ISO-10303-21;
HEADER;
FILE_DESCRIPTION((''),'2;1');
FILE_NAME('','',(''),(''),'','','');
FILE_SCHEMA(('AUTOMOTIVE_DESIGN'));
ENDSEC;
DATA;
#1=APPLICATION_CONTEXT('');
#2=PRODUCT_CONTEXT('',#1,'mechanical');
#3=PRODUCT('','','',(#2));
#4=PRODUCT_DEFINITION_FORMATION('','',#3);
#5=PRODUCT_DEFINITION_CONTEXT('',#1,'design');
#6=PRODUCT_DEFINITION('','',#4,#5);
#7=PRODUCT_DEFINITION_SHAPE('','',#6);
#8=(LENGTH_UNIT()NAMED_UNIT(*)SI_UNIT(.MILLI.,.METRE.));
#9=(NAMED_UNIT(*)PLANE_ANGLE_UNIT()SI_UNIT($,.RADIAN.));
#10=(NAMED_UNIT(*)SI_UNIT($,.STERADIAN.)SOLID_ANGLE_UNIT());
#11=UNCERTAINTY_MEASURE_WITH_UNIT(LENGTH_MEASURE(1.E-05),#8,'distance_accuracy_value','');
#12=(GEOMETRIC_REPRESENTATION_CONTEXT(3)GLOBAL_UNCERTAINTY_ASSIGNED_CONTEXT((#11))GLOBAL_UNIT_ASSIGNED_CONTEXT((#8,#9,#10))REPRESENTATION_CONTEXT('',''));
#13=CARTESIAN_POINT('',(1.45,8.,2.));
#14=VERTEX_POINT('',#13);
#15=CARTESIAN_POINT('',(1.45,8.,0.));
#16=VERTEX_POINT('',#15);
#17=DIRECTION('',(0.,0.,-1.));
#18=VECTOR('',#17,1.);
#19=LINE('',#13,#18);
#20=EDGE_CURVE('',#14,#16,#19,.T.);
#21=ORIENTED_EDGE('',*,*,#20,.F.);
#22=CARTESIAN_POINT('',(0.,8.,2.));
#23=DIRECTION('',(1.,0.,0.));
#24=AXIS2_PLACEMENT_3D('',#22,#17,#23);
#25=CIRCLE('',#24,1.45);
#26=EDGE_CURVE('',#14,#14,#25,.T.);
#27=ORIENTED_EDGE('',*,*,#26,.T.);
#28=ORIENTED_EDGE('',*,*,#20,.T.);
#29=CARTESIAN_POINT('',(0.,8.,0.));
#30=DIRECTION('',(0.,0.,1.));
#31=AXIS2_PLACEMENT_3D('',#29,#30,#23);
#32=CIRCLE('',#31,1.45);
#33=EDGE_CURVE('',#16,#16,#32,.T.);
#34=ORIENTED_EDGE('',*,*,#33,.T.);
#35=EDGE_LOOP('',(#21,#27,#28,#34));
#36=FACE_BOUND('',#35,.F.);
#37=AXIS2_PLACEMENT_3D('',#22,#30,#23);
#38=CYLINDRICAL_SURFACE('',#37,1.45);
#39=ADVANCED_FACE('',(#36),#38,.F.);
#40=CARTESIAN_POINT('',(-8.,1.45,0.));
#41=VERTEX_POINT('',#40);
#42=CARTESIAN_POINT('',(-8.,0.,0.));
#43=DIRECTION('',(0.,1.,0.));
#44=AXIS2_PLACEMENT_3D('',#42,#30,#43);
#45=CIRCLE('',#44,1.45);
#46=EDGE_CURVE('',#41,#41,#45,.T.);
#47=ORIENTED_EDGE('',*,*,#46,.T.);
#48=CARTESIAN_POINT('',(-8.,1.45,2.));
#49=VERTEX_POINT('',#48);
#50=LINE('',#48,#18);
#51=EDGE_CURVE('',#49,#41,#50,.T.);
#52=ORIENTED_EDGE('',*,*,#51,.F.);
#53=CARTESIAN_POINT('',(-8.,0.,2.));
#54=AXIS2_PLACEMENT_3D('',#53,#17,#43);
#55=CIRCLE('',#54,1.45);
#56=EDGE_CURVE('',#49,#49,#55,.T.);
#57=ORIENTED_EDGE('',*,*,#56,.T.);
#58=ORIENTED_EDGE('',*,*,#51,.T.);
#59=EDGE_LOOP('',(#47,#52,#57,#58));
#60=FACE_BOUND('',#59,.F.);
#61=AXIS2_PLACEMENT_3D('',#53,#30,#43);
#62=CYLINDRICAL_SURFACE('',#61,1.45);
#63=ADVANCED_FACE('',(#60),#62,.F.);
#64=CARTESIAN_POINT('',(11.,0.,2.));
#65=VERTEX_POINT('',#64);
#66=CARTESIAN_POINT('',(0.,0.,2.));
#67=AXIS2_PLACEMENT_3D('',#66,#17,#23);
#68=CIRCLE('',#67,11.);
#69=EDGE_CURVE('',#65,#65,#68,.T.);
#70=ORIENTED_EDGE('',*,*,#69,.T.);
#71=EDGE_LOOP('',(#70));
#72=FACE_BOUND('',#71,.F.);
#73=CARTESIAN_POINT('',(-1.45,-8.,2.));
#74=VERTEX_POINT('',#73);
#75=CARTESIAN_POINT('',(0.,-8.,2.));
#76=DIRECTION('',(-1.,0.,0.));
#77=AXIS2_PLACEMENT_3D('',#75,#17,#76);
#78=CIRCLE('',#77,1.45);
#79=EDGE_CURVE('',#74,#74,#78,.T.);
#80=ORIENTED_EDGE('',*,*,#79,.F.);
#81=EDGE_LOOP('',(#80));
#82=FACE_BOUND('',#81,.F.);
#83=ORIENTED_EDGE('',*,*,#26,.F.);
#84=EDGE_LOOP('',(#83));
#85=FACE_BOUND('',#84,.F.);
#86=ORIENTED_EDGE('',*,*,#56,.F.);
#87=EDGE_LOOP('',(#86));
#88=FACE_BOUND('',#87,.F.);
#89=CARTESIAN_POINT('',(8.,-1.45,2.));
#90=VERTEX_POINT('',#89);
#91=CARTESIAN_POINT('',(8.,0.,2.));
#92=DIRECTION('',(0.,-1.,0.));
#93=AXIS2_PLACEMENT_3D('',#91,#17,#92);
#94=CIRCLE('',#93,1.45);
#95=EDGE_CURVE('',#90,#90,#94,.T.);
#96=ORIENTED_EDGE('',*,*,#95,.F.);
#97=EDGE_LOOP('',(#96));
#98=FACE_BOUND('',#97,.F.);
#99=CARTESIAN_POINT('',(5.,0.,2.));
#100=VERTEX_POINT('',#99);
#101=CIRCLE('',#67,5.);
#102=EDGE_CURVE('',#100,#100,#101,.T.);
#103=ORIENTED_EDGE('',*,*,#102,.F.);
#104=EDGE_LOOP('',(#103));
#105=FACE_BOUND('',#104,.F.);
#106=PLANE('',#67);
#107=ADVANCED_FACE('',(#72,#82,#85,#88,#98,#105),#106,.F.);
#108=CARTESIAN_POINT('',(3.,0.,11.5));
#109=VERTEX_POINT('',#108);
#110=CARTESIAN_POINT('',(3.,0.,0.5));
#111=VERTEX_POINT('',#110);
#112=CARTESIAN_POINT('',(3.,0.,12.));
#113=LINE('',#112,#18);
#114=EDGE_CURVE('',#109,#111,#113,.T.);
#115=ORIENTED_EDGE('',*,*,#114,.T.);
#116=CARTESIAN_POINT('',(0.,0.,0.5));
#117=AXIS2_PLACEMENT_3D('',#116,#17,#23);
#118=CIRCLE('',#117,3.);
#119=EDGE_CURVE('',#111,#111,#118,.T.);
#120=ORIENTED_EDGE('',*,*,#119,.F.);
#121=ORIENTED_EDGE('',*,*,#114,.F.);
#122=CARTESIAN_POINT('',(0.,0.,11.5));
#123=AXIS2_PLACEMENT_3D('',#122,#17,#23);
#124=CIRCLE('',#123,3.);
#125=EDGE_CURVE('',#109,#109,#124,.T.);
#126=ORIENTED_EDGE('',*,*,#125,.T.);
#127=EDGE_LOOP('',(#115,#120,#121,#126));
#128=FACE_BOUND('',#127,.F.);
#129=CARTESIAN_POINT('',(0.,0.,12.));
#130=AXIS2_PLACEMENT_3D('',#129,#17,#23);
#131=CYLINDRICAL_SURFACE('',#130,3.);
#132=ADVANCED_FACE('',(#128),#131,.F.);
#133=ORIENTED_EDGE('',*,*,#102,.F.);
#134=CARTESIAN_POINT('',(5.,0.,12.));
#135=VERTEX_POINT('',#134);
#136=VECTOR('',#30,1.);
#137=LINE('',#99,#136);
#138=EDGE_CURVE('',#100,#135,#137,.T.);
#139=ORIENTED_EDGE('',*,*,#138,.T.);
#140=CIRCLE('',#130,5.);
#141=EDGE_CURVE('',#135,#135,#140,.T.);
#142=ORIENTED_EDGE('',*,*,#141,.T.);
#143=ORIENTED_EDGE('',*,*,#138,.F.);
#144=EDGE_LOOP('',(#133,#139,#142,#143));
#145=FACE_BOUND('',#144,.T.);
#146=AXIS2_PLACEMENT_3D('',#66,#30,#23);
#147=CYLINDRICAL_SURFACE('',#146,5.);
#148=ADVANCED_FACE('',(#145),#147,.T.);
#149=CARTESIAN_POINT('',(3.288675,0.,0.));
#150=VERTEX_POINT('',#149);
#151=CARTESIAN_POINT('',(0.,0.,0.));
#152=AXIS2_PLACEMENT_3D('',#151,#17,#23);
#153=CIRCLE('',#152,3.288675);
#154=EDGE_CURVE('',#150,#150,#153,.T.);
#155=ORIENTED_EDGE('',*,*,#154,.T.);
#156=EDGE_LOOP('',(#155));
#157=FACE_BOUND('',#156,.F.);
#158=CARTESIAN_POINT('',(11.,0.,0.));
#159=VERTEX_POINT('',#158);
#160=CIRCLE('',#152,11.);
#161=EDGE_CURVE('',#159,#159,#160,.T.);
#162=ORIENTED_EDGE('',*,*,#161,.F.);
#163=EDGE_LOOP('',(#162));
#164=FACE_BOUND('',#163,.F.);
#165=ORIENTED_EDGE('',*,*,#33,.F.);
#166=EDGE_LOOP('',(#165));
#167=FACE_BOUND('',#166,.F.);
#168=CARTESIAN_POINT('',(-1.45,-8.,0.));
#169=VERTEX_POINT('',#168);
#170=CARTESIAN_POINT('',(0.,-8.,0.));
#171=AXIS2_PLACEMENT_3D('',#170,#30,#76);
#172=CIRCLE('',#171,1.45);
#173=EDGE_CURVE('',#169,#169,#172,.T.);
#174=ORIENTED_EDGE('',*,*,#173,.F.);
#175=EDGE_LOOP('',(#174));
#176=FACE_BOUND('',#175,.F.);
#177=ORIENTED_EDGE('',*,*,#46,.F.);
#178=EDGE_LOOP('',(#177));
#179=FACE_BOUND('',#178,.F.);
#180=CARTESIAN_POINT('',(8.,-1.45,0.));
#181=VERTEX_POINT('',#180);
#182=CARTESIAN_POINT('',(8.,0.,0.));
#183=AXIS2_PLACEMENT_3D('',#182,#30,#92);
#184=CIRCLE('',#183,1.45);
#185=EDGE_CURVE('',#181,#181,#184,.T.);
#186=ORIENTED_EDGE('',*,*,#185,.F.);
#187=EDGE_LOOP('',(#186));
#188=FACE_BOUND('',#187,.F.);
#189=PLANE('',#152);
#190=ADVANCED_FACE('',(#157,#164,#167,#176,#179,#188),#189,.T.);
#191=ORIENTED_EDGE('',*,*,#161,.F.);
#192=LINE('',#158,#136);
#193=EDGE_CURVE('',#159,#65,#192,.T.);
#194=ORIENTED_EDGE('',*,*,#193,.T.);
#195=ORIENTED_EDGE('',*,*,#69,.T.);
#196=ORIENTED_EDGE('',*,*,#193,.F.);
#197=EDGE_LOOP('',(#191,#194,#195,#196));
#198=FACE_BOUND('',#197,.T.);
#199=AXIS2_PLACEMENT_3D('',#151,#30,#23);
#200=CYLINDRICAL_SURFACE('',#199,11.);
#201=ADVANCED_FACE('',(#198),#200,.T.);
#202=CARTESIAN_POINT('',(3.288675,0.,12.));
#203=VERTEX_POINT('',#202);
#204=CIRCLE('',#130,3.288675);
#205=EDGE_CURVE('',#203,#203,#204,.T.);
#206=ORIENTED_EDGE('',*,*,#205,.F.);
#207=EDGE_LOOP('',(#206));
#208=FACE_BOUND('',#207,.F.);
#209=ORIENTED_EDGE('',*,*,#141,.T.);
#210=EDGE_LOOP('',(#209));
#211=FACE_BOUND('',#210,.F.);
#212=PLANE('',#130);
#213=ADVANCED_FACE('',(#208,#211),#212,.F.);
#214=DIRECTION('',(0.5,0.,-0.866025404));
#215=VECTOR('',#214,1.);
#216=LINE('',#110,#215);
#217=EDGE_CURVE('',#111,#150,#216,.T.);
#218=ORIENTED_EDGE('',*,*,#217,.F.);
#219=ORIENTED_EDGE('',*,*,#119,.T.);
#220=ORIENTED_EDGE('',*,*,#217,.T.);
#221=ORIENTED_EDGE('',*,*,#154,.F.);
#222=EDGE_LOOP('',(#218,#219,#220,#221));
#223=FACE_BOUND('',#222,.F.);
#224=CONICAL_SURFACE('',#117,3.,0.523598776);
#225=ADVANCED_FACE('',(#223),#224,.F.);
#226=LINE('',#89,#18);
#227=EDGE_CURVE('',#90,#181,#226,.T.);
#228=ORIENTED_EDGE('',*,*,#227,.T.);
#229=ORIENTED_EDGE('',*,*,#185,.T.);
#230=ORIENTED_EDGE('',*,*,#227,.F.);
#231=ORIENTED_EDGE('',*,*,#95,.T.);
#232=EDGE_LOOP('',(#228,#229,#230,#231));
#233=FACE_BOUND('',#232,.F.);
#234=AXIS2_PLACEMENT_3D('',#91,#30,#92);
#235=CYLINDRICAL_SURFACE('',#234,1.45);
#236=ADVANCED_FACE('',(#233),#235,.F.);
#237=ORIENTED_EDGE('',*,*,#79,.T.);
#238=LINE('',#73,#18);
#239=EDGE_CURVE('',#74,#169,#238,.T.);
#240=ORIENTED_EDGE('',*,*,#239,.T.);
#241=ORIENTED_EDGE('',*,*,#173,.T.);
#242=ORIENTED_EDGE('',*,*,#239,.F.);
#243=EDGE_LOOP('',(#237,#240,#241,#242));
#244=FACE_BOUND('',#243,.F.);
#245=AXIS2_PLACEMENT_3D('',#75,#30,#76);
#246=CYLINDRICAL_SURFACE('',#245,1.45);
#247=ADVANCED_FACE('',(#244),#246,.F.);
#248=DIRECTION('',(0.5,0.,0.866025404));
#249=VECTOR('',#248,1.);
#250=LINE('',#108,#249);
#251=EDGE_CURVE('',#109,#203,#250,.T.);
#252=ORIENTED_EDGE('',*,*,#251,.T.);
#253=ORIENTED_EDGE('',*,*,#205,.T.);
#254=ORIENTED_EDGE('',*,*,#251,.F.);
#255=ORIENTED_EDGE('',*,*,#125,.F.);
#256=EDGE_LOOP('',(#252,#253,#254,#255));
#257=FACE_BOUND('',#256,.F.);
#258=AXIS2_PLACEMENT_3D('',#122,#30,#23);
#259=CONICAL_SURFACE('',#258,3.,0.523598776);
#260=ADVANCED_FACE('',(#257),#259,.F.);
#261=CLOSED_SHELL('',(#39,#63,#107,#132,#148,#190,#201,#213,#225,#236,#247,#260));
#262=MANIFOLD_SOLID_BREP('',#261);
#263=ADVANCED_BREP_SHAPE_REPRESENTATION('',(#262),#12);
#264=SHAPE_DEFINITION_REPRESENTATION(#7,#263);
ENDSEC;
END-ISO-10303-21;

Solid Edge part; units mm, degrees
sketch "Sketch1" plane through (0, 0, 0) normal (0, -1, 0) x (1, 0, 0)
  line L0 (3, 12) -> (3, 0)
  line L1 (3, 0) -> (11, 0)
  line L2 (11, 0) -> (11, 2)
  line L3 (11, 2) -> (5, 2)
  line L4 (5, 2) -> (5, 12)
  line L5 (5, 12) -> (3, 12)
  dimension "D1" = 12
  dimension "D2" = 2
revolve "RevolvedProtrusion1" add sketch "Sketch1" angle 360 about axis through (0, 0, 54) along (0, 0, -1)
hole "Hole1" at (8, 0, 2) direction (0, 0, -1) diameter 2.9 end up to next
pattern_circular "Pattern1" count 4 over 360 about axis through (0, 0, 2) along (0, 0, 1) of "Hole1"
chamfer "Chamfer_1" distance 0.5 angle 30 2 edges at (-3, 0, 12) (-3, 0, 0) measured on face at (1.6602, -2.4988, 9.88)
properties material "Stainless steel"
